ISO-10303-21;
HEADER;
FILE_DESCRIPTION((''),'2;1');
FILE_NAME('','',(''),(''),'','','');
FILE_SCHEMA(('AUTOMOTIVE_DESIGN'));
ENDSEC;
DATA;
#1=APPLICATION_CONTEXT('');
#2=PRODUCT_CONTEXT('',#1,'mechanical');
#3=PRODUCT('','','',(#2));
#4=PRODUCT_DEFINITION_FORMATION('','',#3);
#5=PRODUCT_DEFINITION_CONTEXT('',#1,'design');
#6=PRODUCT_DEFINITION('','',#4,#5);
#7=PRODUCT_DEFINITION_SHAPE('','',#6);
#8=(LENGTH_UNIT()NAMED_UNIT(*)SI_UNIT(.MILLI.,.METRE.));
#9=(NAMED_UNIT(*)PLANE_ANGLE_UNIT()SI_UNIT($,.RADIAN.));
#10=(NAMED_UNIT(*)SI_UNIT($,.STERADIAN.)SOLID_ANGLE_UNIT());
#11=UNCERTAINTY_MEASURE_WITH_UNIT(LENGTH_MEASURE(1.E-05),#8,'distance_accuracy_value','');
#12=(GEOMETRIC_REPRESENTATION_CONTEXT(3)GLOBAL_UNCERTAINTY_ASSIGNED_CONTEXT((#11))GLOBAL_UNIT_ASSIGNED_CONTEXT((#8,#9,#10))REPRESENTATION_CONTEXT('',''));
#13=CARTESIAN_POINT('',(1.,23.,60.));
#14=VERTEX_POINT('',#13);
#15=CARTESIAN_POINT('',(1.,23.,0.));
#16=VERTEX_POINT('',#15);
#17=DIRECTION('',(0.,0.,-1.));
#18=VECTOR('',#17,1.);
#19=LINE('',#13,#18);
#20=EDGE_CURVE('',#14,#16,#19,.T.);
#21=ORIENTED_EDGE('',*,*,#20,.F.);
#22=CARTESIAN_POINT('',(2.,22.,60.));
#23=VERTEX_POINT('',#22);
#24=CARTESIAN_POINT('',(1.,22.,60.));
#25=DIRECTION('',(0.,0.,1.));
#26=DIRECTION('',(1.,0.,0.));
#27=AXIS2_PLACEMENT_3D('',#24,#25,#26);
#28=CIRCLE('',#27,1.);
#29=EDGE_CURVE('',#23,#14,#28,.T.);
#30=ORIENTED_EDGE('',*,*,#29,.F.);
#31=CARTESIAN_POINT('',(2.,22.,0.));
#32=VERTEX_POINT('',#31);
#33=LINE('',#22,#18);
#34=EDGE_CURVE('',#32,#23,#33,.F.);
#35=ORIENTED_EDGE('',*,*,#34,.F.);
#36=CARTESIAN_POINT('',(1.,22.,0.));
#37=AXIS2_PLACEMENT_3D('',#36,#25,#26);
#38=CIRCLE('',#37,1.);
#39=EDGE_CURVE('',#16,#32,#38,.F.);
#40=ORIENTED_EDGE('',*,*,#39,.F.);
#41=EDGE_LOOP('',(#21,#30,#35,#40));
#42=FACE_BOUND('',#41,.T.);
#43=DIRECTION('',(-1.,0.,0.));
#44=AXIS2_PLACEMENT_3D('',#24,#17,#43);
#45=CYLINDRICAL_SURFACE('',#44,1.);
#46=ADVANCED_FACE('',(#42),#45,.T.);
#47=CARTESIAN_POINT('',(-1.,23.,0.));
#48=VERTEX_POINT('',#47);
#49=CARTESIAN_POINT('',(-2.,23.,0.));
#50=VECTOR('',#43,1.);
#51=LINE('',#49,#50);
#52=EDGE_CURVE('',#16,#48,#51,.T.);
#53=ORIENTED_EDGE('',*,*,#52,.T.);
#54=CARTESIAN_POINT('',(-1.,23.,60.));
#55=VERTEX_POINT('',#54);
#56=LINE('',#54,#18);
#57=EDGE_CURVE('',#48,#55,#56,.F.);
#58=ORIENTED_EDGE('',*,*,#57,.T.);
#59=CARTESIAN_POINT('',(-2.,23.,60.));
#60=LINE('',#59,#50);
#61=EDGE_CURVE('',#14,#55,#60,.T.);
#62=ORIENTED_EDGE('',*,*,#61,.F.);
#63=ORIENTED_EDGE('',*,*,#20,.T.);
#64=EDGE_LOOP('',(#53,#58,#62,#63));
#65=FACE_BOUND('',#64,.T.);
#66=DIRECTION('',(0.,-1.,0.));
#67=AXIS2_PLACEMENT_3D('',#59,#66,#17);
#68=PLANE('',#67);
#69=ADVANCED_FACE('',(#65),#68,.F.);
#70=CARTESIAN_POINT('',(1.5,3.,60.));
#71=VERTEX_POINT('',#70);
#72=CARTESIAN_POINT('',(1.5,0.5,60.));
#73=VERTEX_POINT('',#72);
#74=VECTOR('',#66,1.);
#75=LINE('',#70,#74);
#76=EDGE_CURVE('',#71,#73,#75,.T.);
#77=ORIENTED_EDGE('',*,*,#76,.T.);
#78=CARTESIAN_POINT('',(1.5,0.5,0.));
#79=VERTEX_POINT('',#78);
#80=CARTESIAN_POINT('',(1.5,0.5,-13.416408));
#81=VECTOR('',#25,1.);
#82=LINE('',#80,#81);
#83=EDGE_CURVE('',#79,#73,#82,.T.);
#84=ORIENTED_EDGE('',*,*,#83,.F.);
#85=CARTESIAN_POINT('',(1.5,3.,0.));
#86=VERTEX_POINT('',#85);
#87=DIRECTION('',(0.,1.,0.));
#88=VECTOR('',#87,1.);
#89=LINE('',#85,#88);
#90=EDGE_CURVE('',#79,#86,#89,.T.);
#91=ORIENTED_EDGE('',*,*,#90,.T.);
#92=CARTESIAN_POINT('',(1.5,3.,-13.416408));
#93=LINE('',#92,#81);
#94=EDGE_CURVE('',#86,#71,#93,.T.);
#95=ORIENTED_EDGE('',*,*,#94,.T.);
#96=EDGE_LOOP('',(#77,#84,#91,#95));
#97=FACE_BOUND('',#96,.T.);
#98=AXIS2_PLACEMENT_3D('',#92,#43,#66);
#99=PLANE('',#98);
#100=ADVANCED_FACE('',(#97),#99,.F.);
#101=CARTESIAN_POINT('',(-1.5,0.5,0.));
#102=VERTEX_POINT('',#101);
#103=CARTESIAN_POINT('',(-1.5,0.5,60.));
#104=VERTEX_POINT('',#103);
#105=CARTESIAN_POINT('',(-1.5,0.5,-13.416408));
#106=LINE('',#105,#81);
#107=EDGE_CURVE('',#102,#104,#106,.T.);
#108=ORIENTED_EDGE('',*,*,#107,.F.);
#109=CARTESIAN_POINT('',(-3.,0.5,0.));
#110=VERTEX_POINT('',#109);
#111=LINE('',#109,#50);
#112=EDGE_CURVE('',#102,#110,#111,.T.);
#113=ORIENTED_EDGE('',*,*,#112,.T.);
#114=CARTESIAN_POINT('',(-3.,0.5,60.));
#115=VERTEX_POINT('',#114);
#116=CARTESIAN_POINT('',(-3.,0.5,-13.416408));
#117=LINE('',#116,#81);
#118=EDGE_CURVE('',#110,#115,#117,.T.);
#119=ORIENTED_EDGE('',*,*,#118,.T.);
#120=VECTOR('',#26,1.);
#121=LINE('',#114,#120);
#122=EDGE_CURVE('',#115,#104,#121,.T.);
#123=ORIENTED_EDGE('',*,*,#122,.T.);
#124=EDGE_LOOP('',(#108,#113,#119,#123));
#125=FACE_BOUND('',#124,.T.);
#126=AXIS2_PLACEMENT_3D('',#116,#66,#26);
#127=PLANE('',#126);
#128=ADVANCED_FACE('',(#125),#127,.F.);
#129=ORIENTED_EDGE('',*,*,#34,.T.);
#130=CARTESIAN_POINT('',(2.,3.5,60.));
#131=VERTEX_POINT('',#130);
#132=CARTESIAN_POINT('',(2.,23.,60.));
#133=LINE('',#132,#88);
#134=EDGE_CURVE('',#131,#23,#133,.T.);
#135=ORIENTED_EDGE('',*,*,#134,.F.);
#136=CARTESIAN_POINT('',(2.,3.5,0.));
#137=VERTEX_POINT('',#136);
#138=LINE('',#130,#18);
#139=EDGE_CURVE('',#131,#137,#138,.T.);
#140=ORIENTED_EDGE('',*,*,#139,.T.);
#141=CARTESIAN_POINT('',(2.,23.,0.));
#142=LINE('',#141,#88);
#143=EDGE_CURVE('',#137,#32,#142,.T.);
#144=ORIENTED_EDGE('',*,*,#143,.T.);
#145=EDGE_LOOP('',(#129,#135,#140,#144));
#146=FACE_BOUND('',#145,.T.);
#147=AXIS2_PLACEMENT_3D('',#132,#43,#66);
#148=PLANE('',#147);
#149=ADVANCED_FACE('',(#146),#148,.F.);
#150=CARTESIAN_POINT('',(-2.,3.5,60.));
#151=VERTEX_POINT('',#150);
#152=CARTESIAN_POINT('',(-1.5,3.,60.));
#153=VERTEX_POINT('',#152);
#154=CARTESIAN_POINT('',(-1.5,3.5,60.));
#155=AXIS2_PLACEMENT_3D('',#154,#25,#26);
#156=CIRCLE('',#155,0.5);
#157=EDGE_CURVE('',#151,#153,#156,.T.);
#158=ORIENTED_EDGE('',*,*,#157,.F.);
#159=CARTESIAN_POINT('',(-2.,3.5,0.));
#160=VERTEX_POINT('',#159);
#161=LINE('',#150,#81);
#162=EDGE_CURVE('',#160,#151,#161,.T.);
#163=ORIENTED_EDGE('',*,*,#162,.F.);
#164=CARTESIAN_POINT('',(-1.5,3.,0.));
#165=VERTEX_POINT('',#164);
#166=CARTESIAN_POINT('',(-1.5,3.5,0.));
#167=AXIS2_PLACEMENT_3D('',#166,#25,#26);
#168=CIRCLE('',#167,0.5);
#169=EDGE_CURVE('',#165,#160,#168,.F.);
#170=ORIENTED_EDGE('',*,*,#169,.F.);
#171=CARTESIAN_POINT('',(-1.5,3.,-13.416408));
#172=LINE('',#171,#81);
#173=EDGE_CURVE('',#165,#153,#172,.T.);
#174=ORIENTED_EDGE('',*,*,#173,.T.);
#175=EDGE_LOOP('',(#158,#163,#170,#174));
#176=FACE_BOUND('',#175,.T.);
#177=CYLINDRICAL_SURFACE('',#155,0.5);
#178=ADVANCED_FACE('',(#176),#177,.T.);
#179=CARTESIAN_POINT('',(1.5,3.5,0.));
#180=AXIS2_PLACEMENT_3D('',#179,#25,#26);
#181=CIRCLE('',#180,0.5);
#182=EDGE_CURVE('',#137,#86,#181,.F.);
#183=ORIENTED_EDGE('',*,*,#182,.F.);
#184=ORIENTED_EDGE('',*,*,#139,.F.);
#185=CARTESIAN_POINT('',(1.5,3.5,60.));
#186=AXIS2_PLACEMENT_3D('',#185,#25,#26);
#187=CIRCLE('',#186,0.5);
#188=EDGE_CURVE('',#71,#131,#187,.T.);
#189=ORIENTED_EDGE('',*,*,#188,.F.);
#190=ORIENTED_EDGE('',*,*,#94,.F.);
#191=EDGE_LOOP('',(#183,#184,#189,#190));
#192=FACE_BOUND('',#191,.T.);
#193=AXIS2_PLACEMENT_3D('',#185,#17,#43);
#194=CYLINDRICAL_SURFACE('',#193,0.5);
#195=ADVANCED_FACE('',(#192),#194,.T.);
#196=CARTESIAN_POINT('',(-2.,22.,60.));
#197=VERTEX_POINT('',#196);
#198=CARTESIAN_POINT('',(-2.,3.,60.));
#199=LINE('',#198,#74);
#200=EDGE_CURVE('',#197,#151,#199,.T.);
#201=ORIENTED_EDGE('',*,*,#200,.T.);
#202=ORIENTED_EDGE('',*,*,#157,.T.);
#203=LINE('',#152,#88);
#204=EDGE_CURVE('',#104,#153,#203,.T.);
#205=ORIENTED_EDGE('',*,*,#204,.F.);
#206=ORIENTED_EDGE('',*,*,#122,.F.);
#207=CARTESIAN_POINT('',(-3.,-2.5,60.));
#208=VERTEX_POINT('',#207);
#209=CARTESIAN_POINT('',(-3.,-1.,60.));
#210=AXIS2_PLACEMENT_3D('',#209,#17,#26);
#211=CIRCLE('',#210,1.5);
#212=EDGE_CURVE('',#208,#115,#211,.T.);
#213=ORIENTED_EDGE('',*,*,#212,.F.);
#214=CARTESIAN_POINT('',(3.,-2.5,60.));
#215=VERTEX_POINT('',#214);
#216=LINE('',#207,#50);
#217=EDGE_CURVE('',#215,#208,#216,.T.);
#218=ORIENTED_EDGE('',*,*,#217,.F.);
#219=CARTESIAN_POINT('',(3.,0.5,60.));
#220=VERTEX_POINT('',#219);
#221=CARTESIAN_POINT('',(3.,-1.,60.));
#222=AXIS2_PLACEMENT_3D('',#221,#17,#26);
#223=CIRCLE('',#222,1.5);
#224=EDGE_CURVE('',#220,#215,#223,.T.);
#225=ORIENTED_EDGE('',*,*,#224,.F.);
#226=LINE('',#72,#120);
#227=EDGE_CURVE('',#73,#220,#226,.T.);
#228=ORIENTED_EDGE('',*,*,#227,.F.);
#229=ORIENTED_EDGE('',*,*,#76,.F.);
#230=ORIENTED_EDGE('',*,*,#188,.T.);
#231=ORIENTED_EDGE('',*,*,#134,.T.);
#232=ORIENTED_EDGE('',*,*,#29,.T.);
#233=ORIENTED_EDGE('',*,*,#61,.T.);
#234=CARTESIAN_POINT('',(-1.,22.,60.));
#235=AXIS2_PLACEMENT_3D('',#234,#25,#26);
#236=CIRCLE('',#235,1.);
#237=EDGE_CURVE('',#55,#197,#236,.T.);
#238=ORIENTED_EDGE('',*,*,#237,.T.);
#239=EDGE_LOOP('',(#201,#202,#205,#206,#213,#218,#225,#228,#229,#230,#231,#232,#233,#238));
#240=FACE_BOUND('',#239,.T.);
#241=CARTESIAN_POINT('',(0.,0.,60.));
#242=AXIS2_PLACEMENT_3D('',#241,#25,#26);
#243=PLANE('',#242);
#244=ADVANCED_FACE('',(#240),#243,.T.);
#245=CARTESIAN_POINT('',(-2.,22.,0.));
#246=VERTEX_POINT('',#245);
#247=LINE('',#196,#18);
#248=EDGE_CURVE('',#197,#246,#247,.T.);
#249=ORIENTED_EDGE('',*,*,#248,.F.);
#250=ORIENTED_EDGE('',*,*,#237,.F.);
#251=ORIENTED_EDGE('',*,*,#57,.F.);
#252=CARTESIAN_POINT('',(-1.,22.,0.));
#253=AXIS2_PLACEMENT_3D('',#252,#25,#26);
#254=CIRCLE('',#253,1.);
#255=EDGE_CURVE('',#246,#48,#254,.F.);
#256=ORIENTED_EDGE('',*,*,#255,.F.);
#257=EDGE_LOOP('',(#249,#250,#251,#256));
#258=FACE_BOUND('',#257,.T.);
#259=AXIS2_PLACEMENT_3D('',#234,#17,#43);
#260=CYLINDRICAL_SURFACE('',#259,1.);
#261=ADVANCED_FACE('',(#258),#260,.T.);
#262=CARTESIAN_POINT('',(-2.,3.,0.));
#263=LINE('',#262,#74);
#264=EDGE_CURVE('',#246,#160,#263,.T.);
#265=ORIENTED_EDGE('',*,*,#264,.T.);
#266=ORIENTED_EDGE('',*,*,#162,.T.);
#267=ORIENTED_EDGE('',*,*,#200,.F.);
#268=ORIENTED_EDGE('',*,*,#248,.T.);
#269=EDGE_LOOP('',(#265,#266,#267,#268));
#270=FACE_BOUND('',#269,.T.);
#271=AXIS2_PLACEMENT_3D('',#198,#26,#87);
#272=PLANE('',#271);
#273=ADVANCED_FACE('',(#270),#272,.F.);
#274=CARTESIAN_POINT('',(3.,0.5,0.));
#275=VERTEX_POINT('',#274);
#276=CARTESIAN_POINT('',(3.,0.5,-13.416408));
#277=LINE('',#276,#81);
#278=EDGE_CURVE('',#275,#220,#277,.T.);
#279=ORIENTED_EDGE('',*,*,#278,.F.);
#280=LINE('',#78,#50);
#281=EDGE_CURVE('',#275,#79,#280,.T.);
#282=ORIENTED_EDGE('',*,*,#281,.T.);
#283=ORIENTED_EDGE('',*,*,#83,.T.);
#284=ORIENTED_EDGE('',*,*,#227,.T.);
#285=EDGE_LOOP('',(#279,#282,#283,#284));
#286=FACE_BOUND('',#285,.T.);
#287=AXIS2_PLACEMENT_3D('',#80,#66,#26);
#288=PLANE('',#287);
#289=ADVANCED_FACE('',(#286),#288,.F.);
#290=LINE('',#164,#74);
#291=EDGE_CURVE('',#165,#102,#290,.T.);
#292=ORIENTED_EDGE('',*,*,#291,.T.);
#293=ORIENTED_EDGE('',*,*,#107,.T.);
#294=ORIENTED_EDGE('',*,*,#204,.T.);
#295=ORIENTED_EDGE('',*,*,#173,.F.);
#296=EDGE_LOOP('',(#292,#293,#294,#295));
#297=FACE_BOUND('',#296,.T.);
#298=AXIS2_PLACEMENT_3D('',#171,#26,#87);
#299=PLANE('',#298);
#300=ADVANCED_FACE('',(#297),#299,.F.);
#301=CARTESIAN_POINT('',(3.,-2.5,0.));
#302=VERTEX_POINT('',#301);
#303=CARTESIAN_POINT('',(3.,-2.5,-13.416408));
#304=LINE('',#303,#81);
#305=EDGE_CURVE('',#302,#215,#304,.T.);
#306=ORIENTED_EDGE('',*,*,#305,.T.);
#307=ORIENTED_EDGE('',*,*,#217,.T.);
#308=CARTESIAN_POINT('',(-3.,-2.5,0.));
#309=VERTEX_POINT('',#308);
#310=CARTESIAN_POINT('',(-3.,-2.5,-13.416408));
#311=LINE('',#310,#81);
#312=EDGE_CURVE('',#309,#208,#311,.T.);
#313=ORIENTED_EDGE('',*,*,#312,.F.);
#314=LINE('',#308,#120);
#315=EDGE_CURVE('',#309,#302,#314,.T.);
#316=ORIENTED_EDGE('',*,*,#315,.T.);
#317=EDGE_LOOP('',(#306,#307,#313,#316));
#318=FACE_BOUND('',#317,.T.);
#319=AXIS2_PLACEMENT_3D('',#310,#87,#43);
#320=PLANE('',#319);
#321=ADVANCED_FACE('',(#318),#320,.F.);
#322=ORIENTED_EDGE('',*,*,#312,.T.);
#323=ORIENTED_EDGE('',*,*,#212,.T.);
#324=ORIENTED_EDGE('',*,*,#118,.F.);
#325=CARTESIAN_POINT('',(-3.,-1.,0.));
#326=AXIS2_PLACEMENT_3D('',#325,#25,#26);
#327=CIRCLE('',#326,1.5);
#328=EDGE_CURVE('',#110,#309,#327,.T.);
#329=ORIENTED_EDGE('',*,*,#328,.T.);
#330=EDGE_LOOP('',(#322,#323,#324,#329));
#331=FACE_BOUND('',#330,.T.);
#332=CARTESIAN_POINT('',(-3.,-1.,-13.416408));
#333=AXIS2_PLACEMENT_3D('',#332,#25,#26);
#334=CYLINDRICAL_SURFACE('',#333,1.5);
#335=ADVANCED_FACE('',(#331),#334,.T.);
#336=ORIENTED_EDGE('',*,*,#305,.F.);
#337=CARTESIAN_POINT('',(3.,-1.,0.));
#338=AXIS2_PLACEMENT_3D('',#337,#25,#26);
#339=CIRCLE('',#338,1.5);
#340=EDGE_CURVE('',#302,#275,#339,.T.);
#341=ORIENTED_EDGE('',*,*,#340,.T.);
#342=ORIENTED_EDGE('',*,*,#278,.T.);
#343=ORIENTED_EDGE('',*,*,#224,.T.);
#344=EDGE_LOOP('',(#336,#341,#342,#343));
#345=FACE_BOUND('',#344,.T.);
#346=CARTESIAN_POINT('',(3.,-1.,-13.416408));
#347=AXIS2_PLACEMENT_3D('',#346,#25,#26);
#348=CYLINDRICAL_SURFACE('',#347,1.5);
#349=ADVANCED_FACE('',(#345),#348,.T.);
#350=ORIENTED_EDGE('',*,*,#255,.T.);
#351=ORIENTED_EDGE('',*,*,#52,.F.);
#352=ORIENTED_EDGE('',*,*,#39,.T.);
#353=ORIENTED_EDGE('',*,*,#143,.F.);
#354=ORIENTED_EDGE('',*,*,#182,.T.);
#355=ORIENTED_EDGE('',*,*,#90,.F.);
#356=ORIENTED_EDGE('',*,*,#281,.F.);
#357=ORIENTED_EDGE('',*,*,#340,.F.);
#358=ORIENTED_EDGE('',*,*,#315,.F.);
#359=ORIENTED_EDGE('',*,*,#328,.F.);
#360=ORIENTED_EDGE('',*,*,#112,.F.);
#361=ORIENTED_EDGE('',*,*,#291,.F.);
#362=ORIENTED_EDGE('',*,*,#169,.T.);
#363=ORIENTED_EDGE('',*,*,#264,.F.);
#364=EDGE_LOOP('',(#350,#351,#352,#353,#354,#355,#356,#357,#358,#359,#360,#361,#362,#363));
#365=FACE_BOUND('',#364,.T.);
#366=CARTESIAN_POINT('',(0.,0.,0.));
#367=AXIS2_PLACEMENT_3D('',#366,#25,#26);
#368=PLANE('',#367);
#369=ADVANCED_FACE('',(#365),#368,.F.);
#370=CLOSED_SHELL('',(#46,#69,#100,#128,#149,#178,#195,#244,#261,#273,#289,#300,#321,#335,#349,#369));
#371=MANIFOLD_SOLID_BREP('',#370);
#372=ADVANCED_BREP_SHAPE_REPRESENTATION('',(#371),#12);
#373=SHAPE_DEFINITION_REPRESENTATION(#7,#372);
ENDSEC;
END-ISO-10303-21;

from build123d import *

# Parameters (mm, degrees)
BOSS_EXTRUDE1_DEPTH = 60
CUT_EXTRUDE1_DEPTH  = 60
FILLET19_R          = 0.5
FILLET20_R          = 0.5
FILLET22_R          = 1


with BuildPart() as part:
    # Sketch1 → Boss-Extrude1 (new body)
    with BuildSketch(Plane.XY):
        Polygon((-2, 3), (-2, 23), (2, 23), (2, 3), (6, 3), (6, -3), (-6, -3), (-6, 3), align=None)
    extrude(amount=BOSS_EXTRUDE1_DEPTH)

    # Sketch2 → Cut-Extrude1 (cut)
    with BuildSketch(Plane.XY.offset(60)):
        with BuildLine():
            Line((-6, -3), (6, -3))
            Line((6, -3), (6, 3))
            Line((6, 3), (1.5, 3))
            Line((1.5, 3), (1.5, 0.5))
            Line((1.5, 0.5), (3, 0.5))
            ThreePointArc((3, 0.5), (4.5, -1), (3, -2.5))
            Line((3, -2.5), (-3, -2.5))
            ThreePointArc((-3, -2.5), (-4.5, -1), (-3, 0.5))
            Line((-3, 0.5), (-1.5, 0.5))
            Line((-1.5, 0.5), (-1.5, 3))
            Line((-1.5, 3), (-6, 3))
            Line((-6, 3), (-6, -3))
        make_face()
    extrude(amount=-CUT_EXTRUDE1_DEPTH, mode=Mode.SUBTRACT)

    # Fillet19
    fillet19_edges = [part.edges().sort_by_distance(p)[0] for p in [
        (-2, 3, 30),
    ]]
    fillet(fillet19_edges, radius=FILLET19_R - 0.0001)  # a hair under: the kernel refuses the full size

    # Fillet20
    fillet20_edges = [part.edges().sort_by_distance(p)[0] for p in [
        (2, 3, 30),
    ]]
    fillet(fillet20_edges, radius=FILLET20_R - 0.0001)  # a hair under: the kernel refuses the full size

    # Fillet22
    fillet22_edges = [part.edges().sort_by_distance(p)[0] for p in [
        (-2, 23, 30),
        (2, 23, 30),
    ]]
    fillet(fillet22_edges, radius=FILLET22_R)


solid = part.part
